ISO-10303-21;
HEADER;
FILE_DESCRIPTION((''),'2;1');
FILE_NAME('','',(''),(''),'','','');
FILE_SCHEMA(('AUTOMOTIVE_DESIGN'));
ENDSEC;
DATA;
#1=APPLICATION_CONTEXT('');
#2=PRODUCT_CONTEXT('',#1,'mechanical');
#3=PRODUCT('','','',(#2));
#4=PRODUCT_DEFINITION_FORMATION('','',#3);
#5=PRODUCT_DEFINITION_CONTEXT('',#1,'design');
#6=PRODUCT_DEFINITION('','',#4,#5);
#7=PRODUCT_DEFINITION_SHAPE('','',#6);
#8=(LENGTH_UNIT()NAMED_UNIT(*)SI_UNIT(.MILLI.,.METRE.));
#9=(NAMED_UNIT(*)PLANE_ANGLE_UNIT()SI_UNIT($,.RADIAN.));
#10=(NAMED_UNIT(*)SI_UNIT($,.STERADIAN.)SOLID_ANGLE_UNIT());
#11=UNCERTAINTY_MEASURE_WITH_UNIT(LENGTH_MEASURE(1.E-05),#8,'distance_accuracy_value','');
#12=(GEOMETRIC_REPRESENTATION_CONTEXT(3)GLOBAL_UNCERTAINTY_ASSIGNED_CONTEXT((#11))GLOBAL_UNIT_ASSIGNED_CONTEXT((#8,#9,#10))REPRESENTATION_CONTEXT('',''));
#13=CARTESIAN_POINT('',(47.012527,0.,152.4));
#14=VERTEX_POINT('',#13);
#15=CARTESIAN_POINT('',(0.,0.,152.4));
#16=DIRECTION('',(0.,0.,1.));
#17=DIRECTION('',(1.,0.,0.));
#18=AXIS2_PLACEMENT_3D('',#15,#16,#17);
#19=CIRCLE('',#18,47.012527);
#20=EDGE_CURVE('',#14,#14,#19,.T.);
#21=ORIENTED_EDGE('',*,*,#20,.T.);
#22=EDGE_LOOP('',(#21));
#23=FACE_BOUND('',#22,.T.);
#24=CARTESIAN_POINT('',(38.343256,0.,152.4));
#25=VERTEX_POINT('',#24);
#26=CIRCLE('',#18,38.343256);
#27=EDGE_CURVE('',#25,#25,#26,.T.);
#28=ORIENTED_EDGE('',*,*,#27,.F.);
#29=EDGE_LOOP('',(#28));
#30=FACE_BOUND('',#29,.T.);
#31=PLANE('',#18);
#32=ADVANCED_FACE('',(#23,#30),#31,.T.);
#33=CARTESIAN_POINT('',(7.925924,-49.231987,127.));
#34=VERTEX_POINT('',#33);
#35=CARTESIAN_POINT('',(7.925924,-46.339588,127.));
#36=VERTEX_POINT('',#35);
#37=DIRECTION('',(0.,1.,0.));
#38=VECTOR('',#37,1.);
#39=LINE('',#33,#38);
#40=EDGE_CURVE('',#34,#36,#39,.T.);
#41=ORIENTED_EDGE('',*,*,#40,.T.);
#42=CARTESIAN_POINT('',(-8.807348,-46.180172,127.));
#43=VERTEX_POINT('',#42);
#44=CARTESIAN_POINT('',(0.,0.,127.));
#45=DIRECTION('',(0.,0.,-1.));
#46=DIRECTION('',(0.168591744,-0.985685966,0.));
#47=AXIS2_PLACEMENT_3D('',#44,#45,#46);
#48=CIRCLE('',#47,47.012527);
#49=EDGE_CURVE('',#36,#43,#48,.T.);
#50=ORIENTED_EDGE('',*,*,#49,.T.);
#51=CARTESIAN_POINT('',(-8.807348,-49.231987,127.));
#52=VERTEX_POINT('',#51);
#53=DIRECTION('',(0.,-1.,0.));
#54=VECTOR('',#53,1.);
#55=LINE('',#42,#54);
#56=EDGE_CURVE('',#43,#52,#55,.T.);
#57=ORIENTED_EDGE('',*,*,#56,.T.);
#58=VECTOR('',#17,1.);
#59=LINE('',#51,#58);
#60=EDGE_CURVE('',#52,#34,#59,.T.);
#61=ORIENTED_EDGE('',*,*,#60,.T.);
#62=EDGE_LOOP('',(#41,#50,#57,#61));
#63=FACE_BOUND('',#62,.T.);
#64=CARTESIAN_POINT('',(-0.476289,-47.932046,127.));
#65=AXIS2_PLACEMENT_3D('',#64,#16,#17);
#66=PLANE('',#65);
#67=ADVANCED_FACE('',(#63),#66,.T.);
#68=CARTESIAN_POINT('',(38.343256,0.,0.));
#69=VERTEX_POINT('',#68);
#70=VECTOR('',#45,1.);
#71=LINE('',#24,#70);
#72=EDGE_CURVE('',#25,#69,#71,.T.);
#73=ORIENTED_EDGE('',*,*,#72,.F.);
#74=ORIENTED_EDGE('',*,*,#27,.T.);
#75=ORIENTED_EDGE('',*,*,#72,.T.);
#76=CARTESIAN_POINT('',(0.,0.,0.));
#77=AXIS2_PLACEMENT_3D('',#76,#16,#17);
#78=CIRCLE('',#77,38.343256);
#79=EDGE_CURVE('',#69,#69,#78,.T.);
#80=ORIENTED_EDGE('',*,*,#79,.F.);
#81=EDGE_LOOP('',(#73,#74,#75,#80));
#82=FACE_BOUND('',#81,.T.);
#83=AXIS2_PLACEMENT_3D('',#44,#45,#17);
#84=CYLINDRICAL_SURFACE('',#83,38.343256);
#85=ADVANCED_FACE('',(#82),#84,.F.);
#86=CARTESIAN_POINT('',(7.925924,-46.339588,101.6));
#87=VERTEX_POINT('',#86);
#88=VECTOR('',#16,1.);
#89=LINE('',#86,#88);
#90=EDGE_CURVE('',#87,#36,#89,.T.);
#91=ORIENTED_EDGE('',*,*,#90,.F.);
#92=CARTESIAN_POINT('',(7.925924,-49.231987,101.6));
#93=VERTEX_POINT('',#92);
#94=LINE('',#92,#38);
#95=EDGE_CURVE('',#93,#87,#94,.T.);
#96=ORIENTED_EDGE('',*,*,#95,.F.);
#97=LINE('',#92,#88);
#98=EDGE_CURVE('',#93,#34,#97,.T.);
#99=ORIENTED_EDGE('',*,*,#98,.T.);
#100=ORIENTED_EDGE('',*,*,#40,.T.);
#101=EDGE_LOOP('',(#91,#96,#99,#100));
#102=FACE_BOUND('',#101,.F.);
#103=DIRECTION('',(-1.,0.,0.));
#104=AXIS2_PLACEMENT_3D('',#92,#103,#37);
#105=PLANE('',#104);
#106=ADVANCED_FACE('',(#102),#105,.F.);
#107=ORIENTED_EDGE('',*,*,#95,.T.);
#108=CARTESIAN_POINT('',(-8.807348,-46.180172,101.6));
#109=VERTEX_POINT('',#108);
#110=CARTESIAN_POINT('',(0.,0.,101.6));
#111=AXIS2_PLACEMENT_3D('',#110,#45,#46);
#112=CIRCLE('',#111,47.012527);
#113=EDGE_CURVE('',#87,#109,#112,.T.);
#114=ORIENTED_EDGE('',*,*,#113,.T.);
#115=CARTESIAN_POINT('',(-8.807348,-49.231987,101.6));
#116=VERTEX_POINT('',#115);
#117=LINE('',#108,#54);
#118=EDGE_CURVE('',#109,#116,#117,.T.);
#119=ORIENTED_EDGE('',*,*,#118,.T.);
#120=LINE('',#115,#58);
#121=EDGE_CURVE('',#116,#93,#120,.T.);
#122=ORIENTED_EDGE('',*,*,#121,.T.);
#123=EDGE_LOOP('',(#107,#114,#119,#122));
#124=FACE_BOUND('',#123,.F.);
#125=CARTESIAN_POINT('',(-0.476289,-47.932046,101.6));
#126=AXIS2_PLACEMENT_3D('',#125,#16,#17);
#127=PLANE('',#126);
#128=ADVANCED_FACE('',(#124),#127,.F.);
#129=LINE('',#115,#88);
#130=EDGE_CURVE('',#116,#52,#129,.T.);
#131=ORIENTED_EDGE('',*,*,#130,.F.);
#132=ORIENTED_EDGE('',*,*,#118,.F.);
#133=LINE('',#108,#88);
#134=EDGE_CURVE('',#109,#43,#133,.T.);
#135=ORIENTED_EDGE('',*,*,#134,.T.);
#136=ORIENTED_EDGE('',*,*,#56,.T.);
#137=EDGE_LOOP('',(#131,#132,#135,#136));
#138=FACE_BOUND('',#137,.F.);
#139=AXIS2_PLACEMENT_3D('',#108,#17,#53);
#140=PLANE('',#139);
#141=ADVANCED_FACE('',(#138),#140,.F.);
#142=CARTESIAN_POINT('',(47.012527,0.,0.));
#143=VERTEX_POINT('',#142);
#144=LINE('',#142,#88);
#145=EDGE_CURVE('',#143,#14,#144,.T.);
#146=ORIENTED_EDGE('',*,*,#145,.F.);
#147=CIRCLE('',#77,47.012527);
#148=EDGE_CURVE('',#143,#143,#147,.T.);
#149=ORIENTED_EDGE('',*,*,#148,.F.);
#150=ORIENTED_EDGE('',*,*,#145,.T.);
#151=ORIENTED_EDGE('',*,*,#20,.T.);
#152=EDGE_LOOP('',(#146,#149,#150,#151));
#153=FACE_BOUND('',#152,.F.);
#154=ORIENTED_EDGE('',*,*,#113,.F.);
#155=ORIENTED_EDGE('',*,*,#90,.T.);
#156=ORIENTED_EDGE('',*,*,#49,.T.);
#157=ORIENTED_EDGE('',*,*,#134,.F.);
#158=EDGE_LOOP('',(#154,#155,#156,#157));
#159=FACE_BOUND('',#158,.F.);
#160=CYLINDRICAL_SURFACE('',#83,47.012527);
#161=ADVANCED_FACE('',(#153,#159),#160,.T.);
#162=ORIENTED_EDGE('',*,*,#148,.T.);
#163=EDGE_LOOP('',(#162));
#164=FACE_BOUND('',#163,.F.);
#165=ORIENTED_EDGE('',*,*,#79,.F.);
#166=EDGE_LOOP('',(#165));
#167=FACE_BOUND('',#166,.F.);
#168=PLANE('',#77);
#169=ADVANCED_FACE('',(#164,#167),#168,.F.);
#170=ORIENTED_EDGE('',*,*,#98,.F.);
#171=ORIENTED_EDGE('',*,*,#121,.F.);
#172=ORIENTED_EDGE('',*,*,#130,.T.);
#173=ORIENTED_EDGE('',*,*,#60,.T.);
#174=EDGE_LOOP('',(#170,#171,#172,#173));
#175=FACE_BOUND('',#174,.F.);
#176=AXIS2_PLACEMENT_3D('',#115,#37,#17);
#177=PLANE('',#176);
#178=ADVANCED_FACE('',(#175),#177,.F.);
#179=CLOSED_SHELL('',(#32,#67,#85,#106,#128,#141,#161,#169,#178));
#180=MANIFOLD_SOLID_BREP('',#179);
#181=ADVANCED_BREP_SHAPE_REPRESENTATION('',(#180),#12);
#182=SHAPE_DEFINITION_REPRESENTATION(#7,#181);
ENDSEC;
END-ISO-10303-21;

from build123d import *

# Parameters (mm, degrees)
F0_R     = 47.0125269351
F0_R_2   = 38.3432556573
F1_DEPTH = 101.6
F4_DEPTH = 25.4
F5_DEPTH = 25.4
F6_DEPTH = 25.4


with BuildPart() as f1:
    # F0 (on Top) → F1 (new body)
    with BuildSketch(Plane.XY):
        Circle(F0_R)
        Circle(F0_R_2, mode=Mode.SUBTRACT)
    extrude(amount=F1_DEPTH)

    # F4 (add): a face of the model
    f4_faces = [f1.faces().sort_by_distance(p)[0] for p in [
        (-45.6828118712, 0, 101.6),
    ]]
    extrude(f4_faces, amount=F4_DEPTH)

    # F5 (add): a face of the model
    f5_faces = [f1.faces().sort_by_distance(p)[0] for p in [
        (-45.6828118712, 0, 127),
    ]]
    extrude(f5_faces, amount=F5_DEPTH)

    # F3 (on face) → F6 (join)
    with BuildSketch(Plane.XY.offset(101.6)):
        with BuildLine():
            ThreePointArc((7.9259239137, -46.3395880316), (-0.4478621348, -47.0103936202), (-8.8073480874, -46.180172244))
            Line((-8.8073480874, -46.180172244), (-8.8073480874, -49.2319874465))
            Line((-8.8073480874, -49.2319874465), (7.9259239137, -49.2319874465))
            Line((7.9259239137, -49.2319874465), (7.9259239137, -46.3395880316))
        make_face()
    extrude(amount=F6_DEPTH)


solid = f1.part
